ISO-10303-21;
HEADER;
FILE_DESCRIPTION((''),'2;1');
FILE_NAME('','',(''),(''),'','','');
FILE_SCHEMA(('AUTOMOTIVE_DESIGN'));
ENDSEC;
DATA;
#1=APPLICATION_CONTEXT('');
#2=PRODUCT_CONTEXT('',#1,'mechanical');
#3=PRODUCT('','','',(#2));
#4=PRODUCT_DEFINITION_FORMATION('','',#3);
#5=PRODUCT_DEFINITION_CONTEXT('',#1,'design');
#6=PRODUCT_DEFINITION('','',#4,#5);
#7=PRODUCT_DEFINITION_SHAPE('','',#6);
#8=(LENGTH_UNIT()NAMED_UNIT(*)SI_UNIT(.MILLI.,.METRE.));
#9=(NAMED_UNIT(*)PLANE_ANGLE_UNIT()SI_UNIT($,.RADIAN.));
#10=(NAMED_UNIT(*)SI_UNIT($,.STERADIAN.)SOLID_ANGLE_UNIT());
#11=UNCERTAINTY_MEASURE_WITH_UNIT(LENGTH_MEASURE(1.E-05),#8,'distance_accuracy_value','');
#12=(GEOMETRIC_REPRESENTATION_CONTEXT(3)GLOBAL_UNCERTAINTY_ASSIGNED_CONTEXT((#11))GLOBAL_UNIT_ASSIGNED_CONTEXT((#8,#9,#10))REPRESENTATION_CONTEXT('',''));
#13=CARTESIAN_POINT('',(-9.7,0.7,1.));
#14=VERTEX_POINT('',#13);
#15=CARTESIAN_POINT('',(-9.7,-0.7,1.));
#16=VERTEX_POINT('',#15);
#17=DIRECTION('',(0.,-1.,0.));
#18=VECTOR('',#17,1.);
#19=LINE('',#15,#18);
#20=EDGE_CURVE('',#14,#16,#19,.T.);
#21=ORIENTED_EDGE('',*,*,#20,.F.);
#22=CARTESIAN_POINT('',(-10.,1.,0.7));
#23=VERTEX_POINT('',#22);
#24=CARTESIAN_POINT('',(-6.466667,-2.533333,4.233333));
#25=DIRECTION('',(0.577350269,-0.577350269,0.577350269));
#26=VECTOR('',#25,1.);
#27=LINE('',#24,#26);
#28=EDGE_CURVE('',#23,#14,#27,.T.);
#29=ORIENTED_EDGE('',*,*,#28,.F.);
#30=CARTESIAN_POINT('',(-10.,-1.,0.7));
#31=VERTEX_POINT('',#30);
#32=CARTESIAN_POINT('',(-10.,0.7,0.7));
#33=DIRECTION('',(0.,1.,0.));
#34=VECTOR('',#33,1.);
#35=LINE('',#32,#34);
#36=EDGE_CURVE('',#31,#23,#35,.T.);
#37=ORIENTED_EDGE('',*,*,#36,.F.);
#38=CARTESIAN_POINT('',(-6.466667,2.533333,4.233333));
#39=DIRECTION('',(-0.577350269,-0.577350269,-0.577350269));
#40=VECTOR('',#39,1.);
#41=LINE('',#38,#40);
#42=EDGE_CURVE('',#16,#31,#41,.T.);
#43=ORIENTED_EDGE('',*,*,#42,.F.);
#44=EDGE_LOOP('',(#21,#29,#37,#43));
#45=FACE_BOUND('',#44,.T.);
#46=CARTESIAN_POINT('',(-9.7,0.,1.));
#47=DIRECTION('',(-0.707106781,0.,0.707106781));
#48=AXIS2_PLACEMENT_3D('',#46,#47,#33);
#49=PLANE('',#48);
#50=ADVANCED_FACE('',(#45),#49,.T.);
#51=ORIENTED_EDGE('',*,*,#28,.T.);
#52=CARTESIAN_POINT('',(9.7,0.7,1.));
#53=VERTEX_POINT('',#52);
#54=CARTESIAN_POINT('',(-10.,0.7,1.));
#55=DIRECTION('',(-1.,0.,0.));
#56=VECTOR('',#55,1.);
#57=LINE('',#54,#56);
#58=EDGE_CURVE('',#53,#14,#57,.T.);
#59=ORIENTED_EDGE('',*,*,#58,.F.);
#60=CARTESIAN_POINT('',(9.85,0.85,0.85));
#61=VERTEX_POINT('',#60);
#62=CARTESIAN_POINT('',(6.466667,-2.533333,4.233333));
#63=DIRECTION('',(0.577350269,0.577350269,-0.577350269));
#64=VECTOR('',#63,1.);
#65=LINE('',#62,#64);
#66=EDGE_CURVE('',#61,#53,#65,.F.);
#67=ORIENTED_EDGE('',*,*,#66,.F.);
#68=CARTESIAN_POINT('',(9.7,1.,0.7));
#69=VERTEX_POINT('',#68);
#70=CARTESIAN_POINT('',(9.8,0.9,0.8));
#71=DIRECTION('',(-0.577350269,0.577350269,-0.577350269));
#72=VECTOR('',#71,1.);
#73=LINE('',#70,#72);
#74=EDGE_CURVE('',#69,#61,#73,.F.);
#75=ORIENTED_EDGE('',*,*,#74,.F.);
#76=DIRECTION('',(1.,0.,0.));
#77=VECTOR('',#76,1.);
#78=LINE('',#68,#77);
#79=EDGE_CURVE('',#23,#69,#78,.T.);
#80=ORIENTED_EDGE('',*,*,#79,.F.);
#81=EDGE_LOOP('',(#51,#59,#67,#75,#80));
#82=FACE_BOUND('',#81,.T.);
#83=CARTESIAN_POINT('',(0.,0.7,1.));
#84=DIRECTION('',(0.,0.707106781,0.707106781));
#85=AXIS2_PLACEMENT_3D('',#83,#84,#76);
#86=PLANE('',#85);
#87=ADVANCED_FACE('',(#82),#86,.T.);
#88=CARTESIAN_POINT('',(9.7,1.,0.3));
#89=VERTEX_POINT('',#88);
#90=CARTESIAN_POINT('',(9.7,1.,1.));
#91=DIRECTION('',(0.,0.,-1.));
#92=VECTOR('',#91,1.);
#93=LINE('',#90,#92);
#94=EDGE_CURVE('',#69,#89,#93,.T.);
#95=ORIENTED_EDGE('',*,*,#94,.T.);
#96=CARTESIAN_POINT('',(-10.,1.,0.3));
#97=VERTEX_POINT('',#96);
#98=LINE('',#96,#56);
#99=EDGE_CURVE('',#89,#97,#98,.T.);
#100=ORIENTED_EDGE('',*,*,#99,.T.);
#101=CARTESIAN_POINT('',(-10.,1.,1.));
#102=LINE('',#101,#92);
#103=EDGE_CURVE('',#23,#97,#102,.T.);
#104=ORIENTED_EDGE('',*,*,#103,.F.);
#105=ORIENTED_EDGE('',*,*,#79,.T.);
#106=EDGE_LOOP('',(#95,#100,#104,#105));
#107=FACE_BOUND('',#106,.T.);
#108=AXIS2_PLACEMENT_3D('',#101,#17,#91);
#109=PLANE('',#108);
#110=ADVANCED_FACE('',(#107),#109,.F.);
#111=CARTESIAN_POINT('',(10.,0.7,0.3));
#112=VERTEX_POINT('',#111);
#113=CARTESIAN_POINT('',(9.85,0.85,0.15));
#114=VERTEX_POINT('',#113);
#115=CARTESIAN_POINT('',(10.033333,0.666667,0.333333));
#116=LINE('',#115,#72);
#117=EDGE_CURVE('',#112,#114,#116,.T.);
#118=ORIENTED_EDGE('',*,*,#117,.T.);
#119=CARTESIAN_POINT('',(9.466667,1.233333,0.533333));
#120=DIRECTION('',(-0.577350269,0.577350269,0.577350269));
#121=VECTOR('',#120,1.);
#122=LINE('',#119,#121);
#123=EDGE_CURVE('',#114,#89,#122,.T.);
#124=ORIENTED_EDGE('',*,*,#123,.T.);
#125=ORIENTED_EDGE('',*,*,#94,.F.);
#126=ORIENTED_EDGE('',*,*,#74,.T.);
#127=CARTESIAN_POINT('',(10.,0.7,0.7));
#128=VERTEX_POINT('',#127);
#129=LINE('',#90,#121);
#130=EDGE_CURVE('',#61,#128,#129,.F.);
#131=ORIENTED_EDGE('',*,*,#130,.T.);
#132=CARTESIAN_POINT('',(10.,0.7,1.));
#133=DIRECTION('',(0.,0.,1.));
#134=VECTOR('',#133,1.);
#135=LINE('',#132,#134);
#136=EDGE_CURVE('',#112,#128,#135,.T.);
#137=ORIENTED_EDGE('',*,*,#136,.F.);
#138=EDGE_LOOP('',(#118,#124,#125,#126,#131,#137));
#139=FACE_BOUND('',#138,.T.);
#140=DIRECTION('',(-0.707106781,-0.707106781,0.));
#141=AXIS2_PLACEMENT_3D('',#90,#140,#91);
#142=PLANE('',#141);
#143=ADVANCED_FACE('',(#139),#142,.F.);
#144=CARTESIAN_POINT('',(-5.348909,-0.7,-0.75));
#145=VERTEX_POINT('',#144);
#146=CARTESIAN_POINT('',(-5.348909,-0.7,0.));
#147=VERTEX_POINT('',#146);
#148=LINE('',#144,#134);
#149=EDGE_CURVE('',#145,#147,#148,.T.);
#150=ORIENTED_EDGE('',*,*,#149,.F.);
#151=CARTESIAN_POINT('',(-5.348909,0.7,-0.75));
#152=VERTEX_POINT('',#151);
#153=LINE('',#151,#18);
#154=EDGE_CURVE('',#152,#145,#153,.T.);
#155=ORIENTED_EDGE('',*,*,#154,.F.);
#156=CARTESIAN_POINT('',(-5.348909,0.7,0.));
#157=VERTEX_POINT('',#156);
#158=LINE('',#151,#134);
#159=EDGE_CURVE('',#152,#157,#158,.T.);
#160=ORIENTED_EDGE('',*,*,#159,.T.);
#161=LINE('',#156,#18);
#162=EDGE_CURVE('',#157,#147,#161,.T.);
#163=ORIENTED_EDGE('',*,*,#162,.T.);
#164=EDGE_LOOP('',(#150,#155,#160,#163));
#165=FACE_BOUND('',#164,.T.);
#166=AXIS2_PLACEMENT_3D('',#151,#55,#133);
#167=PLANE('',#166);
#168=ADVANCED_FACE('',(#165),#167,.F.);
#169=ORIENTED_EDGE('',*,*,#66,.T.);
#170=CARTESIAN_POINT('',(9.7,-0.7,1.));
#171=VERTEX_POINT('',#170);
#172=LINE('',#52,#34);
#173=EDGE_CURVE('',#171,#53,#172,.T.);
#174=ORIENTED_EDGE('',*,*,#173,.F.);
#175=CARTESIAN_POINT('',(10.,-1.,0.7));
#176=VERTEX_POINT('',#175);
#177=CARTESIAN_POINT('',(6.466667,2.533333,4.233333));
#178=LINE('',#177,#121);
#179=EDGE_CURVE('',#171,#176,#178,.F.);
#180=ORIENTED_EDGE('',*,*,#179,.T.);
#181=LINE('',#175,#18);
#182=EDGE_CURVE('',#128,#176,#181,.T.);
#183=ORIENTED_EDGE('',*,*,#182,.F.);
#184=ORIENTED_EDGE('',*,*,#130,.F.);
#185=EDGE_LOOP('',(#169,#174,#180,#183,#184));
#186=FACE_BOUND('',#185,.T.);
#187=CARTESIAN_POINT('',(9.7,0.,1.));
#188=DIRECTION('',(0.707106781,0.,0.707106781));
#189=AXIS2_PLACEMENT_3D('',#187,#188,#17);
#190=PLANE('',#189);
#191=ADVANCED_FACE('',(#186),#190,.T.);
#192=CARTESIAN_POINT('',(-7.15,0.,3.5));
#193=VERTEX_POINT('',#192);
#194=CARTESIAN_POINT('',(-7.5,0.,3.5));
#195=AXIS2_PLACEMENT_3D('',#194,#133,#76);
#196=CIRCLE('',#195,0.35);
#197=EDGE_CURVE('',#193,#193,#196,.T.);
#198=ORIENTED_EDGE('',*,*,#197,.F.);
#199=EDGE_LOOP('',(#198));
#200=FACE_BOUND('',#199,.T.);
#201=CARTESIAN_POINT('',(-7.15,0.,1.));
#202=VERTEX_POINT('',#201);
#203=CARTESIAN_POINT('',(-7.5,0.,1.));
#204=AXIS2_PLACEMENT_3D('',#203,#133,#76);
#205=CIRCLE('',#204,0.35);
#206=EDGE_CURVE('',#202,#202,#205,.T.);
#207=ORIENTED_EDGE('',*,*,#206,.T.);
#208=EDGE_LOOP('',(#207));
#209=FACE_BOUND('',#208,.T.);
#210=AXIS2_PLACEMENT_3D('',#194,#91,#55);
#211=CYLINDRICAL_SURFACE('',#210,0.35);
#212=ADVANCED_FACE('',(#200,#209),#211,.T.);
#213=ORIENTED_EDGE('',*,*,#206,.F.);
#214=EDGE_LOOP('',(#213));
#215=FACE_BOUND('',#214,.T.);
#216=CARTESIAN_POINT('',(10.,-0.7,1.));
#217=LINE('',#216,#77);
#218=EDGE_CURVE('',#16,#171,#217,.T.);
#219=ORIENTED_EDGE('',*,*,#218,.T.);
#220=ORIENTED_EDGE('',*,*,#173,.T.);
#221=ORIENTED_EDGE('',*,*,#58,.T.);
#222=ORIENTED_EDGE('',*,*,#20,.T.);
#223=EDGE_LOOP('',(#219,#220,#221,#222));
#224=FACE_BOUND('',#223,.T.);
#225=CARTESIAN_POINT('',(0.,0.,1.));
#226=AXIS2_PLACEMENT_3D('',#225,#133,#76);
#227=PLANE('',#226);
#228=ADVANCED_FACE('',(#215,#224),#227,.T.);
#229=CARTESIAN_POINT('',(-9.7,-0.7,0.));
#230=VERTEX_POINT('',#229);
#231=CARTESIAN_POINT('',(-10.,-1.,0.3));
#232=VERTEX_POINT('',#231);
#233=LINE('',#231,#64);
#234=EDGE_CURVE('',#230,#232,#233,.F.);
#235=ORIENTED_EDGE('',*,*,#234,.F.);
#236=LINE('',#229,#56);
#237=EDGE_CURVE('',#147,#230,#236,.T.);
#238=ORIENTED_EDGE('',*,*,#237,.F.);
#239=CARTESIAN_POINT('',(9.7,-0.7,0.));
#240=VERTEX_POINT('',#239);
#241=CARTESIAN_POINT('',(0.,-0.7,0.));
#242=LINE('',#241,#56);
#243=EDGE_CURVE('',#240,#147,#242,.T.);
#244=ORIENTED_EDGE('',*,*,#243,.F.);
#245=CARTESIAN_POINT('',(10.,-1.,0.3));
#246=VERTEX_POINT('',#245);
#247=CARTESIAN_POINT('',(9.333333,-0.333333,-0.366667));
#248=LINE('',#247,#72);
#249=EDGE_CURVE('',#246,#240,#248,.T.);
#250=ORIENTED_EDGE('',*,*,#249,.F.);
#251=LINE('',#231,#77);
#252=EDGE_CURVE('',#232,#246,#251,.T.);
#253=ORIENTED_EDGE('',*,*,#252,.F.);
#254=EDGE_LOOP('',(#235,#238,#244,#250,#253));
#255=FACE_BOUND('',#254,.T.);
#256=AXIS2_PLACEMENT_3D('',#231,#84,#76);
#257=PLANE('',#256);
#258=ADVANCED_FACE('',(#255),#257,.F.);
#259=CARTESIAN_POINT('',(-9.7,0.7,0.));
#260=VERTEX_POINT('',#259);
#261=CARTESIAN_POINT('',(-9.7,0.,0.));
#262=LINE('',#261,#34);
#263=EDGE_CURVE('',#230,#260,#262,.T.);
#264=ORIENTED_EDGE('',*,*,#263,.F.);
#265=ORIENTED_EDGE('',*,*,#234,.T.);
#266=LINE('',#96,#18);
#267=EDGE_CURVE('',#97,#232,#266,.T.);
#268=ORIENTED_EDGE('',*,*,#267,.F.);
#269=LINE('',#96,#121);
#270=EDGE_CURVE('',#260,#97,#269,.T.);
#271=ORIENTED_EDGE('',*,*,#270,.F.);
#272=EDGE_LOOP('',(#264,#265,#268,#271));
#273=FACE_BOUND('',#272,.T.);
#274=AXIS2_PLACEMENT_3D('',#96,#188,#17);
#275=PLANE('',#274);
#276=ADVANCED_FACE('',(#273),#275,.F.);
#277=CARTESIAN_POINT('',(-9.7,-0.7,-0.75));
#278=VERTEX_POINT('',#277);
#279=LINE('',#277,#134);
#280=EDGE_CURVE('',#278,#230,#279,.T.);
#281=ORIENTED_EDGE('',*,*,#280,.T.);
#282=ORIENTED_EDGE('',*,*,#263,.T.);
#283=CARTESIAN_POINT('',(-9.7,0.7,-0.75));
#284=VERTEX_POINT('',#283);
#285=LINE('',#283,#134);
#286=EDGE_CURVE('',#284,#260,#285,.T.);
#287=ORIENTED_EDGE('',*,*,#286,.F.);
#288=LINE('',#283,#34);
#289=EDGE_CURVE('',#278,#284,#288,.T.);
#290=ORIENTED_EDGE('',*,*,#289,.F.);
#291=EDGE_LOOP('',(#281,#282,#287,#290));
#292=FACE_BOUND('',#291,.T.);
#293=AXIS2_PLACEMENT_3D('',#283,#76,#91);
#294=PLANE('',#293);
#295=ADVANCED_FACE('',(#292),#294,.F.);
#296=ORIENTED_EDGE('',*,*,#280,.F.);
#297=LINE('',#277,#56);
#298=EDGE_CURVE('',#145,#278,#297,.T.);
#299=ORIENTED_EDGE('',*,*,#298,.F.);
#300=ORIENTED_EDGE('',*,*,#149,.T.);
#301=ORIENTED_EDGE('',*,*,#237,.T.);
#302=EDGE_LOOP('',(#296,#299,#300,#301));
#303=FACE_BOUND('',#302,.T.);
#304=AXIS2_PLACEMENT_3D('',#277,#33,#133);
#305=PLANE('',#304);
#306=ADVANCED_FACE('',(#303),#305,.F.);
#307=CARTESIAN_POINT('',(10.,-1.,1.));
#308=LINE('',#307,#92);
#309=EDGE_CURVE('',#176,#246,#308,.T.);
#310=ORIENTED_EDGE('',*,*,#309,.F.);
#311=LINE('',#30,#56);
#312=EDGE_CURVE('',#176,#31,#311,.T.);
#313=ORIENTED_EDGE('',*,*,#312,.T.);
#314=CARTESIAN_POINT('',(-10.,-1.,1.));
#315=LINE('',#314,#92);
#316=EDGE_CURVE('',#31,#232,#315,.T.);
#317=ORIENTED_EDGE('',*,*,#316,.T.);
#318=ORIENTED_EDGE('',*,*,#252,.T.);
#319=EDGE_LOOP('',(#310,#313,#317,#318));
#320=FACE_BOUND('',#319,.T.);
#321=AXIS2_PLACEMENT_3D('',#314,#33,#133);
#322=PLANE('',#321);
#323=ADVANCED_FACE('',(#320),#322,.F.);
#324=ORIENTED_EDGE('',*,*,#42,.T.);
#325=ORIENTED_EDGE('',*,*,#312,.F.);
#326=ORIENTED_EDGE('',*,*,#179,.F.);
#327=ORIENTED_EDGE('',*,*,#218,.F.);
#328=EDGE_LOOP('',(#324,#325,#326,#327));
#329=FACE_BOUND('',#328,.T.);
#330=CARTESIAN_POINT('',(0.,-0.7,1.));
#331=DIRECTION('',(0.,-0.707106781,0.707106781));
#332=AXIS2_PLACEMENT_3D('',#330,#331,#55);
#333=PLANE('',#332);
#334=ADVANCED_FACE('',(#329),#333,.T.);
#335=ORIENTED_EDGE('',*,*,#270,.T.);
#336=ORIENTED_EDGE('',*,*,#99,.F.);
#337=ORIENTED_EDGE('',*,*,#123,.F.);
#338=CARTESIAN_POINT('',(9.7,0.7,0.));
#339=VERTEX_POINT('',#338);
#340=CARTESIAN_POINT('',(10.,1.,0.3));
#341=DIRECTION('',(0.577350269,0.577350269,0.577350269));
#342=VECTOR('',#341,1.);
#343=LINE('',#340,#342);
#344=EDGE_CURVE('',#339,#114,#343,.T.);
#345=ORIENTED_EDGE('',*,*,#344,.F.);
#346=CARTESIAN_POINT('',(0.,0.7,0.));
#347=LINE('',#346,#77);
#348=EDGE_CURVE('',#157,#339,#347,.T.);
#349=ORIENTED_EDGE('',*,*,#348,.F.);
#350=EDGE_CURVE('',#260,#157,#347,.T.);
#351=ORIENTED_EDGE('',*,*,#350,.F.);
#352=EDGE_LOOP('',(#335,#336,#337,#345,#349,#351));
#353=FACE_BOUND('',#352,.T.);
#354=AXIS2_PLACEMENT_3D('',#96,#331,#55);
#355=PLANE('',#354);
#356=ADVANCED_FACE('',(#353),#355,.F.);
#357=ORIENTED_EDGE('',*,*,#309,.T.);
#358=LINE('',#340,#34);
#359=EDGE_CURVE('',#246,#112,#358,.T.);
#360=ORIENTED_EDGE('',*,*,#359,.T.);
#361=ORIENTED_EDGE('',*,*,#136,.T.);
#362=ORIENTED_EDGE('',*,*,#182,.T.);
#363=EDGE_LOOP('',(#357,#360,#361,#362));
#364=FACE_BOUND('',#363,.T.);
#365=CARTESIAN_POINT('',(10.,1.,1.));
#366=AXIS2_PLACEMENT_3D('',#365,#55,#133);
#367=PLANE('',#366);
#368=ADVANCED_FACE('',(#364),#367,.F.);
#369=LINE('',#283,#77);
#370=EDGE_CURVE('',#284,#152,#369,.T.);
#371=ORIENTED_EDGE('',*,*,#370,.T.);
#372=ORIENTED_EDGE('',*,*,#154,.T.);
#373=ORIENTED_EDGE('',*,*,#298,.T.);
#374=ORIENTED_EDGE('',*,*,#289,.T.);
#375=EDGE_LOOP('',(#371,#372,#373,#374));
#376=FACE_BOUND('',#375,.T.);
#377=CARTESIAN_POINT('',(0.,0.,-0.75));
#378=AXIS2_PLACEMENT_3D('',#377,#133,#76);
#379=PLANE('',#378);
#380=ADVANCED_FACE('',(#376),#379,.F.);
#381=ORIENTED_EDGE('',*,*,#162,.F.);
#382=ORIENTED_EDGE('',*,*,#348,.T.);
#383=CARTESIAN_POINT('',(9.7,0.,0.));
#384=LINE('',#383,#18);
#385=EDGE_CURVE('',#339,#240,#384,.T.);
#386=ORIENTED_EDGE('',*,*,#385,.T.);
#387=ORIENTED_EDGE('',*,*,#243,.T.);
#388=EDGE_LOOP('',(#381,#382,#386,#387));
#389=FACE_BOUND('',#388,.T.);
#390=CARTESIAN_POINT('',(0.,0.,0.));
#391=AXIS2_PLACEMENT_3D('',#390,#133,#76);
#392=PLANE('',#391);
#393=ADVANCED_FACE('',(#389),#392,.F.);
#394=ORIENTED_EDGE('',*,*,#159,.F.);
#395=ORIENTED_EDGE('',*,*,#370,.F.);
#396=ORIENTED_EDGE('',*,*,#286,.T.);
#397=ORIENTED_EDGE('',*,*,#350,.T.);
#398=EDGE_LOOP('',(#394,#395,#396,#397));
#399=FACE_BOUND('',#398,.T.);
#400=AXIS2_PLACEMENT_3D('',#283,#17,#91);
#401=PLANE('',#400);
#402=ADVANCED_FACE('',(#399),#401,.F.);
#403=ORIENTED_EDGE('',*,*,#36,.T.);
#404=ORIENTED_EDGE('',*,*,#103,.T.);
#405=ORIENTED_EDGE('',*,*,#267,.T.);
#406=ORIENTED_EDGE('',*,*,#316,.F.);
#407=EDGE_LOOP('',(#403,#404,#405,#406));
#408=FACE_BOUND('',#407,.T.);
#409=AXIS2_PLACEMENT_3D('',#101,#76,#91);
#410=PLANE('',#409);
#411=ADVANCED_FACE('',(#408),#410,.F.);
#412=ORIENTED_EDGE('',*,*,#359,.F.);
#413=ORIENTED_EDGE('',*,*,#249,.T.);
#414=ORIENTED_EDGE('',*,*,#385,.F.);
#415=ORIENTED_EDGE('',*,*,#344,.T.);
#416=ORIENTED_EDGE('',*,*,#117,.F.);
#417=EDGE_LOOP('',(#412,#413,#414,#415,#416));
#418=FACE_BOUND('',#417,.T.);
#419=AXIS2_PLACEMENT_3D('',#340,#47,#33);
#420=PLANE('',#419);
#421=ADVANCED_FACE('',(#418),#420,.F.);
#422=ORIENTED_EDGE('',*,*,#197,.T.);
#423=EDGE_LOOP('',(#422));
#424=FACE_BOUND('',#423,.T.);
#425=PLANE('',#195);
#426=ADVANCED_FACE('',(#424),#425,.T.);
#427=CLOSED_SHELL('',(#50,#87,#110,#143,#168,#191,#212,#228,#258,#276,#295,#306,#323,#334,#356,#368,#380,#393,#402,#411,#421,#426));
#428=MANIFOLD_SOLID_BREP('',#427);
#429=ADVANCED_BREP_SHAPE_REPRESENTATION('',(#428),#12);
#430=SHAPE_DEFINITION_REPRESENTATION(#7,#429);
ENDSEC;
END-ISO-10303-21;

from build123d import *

# Parameters (mm, degrees)
SKETCH1_W           = 20
SKETCH1_H           = 2
BOSS_EXTRUDE1_DEPTH = 1
SKETCH2_R           = 0.35
BOSS_EXTRUDE3_DEPTH = 2.5
CHAMFER2_SIZE       = 0.3
CHAMFER4_SIZE       = 0.3
CHAMFER5_SIZE       = 0.3
SKETCH4_W           = 4.351090726
SKETCH4_H           = 1.4
BOSS_EXTRUDE4_DEPTH = 0.75


with BuildPart() as part:
    # Sketch1 → Boss-Extrude1 (new body)
    with BuildSketch(Plane.XY):
        Rectangle(SKETCH1_W, SKETCH1_H)
    extrude(amount=BOSS_EXTRUDE1_DEPTH)

    # Sketch2 → Boss-Extrude3 (add)
    with BuildSketch(Plane.XY.offset(1)):
        with Locations((-7.5, 0)):
            Circle(SKETCH2_R)
    extrude(amount=BOSS_EXTRUDE3_DEPTH)

    # Chamfer2
    chamfer2_edges = [part.edges().sort_by_distance(p)[0] for p in [
        (10, 1, 0.5),
    ]]
    chamfer(chamfer2_edges, length=CHAMFER2_SIZE)

    # Chamfer4
    # the kernel refuses this chamfer: 0.3 mm, written as the material it takes off along each edge
    with BuildSketch(Plane(origin=(10, 1.471504896, 0), x_dir=(-0.9996219169112968, 0, -0.02749587661058633), z_dir=(0, -1, 0))) as chamfer4_piece_1:
        Polygon((CHAMFER4_SIZE * 0.999621916911, -CHAMFER4_SIZE * 0.0274958766106), (-CHAMFER4_SIZE * 0.0274958766106, -CHAMFER4_SIZE * 0.999621916911), (0, 0), align=None)
    extrude(amount=3.243009793, mode=Mode.SUBTRACT)
    with BuildSketch(Plane(origin=(10, 1.471504896, 1), x_dir=(-0.9996219169112968, 0, 0.027495876610586622), z_dir=(0, -1, 0))) as chamfer4_piece_2:
        Polygon((CHAMFER4_SIZE * 0.999621916911, CHAMFER4_SIZE * 0.0274958766106), (-CHAMFER4_SIZE * 0.0274958766106, CHAMFER4_SIZE * 0.999621916911), (0, 0), align=None)
    extrude(amount=3.243009793, mode=Mode.SUBTRACT)
    with BuildSketch(Plane(origin=(10.771504896, -1, 1), x_dir=(0, 0.9996219169112968, 0.027495876610586632), z_dir=(-1, 0, 0))) as chamfer4_piece_3:
        Polygon((CHAMFER4_SIZE * 0.999621916911, CHAMFER4_SIZE * 0.0274958766106), (-CHAMFER4_SIZE * 0.0274958766106, CHAMFER4_SIZE * 0.999621916911), (0, 0), align=None)
    extrude(amount=21.543009793, mode=Mode.SUBTRACT)
    with BuildSketch(Plane(origin=(-10.771504896, 1, 0), x_dir=(0, 0.027495876610586632, 0.9996219169112968), z_dir=(1, 0, 0))) as chamfer4_piece_4:
        Polygon((CHAMFER4_SIZE * 0.999621916911, CHAMFER4_SIZE * 0.0274958766106), (-CHAMFER4_SIZE * 0.0274958766106, CHAMFER4_SIZE * 0.999621916911), (0, 0), align=None)
    extrude(amount=21.243009793, mode=Mode.SUBTRACT)
    with BuildSketch(Plane(origin=(-10.771504896, 1, 1), x_dir=(0, 0.027495876610586632, -0.9996219169112968), z_dir=(1, 0, 0))) as chamfer4_piece_5:
        Polygon((CHAMFER4_SIZE * 0.999621916911, -CHAMFER4_SIZE * 0.0274958766106), (-CHAMFER4_SIZE * 0.0274958766106, -CHAMFER4_SIZE * 0.999621916911), (0, 0), align=None)
    extrude(amount=21.243009793, mode=Mode.SUBTRACT)

    # Chamfer5
    chamfer5_edges = [part.edges().sort_by_distance(p)[0] for p in [
        (-10, 0, 1),
        (-10, -0.15, 0),
        (-0.15, -1, 0),
    ]]
    chamfer(chamfer5_edges, length=CHAMFER5_SIZE)

    # Sketch4 → Boss-Extrude4 (add)
    with BuildSketch(Plane(origin=(0, 0, 0), x_dir=(-1, 0, 0), z_dir=(0, 0, -1))):
        with Locations((7.524454637, 0)):
            Rectangle(SKETCH4_W, SKETCH4_H)
    extrude(amount=BOSS_EXTRUDE4_DEPTH)


solid = part.part
